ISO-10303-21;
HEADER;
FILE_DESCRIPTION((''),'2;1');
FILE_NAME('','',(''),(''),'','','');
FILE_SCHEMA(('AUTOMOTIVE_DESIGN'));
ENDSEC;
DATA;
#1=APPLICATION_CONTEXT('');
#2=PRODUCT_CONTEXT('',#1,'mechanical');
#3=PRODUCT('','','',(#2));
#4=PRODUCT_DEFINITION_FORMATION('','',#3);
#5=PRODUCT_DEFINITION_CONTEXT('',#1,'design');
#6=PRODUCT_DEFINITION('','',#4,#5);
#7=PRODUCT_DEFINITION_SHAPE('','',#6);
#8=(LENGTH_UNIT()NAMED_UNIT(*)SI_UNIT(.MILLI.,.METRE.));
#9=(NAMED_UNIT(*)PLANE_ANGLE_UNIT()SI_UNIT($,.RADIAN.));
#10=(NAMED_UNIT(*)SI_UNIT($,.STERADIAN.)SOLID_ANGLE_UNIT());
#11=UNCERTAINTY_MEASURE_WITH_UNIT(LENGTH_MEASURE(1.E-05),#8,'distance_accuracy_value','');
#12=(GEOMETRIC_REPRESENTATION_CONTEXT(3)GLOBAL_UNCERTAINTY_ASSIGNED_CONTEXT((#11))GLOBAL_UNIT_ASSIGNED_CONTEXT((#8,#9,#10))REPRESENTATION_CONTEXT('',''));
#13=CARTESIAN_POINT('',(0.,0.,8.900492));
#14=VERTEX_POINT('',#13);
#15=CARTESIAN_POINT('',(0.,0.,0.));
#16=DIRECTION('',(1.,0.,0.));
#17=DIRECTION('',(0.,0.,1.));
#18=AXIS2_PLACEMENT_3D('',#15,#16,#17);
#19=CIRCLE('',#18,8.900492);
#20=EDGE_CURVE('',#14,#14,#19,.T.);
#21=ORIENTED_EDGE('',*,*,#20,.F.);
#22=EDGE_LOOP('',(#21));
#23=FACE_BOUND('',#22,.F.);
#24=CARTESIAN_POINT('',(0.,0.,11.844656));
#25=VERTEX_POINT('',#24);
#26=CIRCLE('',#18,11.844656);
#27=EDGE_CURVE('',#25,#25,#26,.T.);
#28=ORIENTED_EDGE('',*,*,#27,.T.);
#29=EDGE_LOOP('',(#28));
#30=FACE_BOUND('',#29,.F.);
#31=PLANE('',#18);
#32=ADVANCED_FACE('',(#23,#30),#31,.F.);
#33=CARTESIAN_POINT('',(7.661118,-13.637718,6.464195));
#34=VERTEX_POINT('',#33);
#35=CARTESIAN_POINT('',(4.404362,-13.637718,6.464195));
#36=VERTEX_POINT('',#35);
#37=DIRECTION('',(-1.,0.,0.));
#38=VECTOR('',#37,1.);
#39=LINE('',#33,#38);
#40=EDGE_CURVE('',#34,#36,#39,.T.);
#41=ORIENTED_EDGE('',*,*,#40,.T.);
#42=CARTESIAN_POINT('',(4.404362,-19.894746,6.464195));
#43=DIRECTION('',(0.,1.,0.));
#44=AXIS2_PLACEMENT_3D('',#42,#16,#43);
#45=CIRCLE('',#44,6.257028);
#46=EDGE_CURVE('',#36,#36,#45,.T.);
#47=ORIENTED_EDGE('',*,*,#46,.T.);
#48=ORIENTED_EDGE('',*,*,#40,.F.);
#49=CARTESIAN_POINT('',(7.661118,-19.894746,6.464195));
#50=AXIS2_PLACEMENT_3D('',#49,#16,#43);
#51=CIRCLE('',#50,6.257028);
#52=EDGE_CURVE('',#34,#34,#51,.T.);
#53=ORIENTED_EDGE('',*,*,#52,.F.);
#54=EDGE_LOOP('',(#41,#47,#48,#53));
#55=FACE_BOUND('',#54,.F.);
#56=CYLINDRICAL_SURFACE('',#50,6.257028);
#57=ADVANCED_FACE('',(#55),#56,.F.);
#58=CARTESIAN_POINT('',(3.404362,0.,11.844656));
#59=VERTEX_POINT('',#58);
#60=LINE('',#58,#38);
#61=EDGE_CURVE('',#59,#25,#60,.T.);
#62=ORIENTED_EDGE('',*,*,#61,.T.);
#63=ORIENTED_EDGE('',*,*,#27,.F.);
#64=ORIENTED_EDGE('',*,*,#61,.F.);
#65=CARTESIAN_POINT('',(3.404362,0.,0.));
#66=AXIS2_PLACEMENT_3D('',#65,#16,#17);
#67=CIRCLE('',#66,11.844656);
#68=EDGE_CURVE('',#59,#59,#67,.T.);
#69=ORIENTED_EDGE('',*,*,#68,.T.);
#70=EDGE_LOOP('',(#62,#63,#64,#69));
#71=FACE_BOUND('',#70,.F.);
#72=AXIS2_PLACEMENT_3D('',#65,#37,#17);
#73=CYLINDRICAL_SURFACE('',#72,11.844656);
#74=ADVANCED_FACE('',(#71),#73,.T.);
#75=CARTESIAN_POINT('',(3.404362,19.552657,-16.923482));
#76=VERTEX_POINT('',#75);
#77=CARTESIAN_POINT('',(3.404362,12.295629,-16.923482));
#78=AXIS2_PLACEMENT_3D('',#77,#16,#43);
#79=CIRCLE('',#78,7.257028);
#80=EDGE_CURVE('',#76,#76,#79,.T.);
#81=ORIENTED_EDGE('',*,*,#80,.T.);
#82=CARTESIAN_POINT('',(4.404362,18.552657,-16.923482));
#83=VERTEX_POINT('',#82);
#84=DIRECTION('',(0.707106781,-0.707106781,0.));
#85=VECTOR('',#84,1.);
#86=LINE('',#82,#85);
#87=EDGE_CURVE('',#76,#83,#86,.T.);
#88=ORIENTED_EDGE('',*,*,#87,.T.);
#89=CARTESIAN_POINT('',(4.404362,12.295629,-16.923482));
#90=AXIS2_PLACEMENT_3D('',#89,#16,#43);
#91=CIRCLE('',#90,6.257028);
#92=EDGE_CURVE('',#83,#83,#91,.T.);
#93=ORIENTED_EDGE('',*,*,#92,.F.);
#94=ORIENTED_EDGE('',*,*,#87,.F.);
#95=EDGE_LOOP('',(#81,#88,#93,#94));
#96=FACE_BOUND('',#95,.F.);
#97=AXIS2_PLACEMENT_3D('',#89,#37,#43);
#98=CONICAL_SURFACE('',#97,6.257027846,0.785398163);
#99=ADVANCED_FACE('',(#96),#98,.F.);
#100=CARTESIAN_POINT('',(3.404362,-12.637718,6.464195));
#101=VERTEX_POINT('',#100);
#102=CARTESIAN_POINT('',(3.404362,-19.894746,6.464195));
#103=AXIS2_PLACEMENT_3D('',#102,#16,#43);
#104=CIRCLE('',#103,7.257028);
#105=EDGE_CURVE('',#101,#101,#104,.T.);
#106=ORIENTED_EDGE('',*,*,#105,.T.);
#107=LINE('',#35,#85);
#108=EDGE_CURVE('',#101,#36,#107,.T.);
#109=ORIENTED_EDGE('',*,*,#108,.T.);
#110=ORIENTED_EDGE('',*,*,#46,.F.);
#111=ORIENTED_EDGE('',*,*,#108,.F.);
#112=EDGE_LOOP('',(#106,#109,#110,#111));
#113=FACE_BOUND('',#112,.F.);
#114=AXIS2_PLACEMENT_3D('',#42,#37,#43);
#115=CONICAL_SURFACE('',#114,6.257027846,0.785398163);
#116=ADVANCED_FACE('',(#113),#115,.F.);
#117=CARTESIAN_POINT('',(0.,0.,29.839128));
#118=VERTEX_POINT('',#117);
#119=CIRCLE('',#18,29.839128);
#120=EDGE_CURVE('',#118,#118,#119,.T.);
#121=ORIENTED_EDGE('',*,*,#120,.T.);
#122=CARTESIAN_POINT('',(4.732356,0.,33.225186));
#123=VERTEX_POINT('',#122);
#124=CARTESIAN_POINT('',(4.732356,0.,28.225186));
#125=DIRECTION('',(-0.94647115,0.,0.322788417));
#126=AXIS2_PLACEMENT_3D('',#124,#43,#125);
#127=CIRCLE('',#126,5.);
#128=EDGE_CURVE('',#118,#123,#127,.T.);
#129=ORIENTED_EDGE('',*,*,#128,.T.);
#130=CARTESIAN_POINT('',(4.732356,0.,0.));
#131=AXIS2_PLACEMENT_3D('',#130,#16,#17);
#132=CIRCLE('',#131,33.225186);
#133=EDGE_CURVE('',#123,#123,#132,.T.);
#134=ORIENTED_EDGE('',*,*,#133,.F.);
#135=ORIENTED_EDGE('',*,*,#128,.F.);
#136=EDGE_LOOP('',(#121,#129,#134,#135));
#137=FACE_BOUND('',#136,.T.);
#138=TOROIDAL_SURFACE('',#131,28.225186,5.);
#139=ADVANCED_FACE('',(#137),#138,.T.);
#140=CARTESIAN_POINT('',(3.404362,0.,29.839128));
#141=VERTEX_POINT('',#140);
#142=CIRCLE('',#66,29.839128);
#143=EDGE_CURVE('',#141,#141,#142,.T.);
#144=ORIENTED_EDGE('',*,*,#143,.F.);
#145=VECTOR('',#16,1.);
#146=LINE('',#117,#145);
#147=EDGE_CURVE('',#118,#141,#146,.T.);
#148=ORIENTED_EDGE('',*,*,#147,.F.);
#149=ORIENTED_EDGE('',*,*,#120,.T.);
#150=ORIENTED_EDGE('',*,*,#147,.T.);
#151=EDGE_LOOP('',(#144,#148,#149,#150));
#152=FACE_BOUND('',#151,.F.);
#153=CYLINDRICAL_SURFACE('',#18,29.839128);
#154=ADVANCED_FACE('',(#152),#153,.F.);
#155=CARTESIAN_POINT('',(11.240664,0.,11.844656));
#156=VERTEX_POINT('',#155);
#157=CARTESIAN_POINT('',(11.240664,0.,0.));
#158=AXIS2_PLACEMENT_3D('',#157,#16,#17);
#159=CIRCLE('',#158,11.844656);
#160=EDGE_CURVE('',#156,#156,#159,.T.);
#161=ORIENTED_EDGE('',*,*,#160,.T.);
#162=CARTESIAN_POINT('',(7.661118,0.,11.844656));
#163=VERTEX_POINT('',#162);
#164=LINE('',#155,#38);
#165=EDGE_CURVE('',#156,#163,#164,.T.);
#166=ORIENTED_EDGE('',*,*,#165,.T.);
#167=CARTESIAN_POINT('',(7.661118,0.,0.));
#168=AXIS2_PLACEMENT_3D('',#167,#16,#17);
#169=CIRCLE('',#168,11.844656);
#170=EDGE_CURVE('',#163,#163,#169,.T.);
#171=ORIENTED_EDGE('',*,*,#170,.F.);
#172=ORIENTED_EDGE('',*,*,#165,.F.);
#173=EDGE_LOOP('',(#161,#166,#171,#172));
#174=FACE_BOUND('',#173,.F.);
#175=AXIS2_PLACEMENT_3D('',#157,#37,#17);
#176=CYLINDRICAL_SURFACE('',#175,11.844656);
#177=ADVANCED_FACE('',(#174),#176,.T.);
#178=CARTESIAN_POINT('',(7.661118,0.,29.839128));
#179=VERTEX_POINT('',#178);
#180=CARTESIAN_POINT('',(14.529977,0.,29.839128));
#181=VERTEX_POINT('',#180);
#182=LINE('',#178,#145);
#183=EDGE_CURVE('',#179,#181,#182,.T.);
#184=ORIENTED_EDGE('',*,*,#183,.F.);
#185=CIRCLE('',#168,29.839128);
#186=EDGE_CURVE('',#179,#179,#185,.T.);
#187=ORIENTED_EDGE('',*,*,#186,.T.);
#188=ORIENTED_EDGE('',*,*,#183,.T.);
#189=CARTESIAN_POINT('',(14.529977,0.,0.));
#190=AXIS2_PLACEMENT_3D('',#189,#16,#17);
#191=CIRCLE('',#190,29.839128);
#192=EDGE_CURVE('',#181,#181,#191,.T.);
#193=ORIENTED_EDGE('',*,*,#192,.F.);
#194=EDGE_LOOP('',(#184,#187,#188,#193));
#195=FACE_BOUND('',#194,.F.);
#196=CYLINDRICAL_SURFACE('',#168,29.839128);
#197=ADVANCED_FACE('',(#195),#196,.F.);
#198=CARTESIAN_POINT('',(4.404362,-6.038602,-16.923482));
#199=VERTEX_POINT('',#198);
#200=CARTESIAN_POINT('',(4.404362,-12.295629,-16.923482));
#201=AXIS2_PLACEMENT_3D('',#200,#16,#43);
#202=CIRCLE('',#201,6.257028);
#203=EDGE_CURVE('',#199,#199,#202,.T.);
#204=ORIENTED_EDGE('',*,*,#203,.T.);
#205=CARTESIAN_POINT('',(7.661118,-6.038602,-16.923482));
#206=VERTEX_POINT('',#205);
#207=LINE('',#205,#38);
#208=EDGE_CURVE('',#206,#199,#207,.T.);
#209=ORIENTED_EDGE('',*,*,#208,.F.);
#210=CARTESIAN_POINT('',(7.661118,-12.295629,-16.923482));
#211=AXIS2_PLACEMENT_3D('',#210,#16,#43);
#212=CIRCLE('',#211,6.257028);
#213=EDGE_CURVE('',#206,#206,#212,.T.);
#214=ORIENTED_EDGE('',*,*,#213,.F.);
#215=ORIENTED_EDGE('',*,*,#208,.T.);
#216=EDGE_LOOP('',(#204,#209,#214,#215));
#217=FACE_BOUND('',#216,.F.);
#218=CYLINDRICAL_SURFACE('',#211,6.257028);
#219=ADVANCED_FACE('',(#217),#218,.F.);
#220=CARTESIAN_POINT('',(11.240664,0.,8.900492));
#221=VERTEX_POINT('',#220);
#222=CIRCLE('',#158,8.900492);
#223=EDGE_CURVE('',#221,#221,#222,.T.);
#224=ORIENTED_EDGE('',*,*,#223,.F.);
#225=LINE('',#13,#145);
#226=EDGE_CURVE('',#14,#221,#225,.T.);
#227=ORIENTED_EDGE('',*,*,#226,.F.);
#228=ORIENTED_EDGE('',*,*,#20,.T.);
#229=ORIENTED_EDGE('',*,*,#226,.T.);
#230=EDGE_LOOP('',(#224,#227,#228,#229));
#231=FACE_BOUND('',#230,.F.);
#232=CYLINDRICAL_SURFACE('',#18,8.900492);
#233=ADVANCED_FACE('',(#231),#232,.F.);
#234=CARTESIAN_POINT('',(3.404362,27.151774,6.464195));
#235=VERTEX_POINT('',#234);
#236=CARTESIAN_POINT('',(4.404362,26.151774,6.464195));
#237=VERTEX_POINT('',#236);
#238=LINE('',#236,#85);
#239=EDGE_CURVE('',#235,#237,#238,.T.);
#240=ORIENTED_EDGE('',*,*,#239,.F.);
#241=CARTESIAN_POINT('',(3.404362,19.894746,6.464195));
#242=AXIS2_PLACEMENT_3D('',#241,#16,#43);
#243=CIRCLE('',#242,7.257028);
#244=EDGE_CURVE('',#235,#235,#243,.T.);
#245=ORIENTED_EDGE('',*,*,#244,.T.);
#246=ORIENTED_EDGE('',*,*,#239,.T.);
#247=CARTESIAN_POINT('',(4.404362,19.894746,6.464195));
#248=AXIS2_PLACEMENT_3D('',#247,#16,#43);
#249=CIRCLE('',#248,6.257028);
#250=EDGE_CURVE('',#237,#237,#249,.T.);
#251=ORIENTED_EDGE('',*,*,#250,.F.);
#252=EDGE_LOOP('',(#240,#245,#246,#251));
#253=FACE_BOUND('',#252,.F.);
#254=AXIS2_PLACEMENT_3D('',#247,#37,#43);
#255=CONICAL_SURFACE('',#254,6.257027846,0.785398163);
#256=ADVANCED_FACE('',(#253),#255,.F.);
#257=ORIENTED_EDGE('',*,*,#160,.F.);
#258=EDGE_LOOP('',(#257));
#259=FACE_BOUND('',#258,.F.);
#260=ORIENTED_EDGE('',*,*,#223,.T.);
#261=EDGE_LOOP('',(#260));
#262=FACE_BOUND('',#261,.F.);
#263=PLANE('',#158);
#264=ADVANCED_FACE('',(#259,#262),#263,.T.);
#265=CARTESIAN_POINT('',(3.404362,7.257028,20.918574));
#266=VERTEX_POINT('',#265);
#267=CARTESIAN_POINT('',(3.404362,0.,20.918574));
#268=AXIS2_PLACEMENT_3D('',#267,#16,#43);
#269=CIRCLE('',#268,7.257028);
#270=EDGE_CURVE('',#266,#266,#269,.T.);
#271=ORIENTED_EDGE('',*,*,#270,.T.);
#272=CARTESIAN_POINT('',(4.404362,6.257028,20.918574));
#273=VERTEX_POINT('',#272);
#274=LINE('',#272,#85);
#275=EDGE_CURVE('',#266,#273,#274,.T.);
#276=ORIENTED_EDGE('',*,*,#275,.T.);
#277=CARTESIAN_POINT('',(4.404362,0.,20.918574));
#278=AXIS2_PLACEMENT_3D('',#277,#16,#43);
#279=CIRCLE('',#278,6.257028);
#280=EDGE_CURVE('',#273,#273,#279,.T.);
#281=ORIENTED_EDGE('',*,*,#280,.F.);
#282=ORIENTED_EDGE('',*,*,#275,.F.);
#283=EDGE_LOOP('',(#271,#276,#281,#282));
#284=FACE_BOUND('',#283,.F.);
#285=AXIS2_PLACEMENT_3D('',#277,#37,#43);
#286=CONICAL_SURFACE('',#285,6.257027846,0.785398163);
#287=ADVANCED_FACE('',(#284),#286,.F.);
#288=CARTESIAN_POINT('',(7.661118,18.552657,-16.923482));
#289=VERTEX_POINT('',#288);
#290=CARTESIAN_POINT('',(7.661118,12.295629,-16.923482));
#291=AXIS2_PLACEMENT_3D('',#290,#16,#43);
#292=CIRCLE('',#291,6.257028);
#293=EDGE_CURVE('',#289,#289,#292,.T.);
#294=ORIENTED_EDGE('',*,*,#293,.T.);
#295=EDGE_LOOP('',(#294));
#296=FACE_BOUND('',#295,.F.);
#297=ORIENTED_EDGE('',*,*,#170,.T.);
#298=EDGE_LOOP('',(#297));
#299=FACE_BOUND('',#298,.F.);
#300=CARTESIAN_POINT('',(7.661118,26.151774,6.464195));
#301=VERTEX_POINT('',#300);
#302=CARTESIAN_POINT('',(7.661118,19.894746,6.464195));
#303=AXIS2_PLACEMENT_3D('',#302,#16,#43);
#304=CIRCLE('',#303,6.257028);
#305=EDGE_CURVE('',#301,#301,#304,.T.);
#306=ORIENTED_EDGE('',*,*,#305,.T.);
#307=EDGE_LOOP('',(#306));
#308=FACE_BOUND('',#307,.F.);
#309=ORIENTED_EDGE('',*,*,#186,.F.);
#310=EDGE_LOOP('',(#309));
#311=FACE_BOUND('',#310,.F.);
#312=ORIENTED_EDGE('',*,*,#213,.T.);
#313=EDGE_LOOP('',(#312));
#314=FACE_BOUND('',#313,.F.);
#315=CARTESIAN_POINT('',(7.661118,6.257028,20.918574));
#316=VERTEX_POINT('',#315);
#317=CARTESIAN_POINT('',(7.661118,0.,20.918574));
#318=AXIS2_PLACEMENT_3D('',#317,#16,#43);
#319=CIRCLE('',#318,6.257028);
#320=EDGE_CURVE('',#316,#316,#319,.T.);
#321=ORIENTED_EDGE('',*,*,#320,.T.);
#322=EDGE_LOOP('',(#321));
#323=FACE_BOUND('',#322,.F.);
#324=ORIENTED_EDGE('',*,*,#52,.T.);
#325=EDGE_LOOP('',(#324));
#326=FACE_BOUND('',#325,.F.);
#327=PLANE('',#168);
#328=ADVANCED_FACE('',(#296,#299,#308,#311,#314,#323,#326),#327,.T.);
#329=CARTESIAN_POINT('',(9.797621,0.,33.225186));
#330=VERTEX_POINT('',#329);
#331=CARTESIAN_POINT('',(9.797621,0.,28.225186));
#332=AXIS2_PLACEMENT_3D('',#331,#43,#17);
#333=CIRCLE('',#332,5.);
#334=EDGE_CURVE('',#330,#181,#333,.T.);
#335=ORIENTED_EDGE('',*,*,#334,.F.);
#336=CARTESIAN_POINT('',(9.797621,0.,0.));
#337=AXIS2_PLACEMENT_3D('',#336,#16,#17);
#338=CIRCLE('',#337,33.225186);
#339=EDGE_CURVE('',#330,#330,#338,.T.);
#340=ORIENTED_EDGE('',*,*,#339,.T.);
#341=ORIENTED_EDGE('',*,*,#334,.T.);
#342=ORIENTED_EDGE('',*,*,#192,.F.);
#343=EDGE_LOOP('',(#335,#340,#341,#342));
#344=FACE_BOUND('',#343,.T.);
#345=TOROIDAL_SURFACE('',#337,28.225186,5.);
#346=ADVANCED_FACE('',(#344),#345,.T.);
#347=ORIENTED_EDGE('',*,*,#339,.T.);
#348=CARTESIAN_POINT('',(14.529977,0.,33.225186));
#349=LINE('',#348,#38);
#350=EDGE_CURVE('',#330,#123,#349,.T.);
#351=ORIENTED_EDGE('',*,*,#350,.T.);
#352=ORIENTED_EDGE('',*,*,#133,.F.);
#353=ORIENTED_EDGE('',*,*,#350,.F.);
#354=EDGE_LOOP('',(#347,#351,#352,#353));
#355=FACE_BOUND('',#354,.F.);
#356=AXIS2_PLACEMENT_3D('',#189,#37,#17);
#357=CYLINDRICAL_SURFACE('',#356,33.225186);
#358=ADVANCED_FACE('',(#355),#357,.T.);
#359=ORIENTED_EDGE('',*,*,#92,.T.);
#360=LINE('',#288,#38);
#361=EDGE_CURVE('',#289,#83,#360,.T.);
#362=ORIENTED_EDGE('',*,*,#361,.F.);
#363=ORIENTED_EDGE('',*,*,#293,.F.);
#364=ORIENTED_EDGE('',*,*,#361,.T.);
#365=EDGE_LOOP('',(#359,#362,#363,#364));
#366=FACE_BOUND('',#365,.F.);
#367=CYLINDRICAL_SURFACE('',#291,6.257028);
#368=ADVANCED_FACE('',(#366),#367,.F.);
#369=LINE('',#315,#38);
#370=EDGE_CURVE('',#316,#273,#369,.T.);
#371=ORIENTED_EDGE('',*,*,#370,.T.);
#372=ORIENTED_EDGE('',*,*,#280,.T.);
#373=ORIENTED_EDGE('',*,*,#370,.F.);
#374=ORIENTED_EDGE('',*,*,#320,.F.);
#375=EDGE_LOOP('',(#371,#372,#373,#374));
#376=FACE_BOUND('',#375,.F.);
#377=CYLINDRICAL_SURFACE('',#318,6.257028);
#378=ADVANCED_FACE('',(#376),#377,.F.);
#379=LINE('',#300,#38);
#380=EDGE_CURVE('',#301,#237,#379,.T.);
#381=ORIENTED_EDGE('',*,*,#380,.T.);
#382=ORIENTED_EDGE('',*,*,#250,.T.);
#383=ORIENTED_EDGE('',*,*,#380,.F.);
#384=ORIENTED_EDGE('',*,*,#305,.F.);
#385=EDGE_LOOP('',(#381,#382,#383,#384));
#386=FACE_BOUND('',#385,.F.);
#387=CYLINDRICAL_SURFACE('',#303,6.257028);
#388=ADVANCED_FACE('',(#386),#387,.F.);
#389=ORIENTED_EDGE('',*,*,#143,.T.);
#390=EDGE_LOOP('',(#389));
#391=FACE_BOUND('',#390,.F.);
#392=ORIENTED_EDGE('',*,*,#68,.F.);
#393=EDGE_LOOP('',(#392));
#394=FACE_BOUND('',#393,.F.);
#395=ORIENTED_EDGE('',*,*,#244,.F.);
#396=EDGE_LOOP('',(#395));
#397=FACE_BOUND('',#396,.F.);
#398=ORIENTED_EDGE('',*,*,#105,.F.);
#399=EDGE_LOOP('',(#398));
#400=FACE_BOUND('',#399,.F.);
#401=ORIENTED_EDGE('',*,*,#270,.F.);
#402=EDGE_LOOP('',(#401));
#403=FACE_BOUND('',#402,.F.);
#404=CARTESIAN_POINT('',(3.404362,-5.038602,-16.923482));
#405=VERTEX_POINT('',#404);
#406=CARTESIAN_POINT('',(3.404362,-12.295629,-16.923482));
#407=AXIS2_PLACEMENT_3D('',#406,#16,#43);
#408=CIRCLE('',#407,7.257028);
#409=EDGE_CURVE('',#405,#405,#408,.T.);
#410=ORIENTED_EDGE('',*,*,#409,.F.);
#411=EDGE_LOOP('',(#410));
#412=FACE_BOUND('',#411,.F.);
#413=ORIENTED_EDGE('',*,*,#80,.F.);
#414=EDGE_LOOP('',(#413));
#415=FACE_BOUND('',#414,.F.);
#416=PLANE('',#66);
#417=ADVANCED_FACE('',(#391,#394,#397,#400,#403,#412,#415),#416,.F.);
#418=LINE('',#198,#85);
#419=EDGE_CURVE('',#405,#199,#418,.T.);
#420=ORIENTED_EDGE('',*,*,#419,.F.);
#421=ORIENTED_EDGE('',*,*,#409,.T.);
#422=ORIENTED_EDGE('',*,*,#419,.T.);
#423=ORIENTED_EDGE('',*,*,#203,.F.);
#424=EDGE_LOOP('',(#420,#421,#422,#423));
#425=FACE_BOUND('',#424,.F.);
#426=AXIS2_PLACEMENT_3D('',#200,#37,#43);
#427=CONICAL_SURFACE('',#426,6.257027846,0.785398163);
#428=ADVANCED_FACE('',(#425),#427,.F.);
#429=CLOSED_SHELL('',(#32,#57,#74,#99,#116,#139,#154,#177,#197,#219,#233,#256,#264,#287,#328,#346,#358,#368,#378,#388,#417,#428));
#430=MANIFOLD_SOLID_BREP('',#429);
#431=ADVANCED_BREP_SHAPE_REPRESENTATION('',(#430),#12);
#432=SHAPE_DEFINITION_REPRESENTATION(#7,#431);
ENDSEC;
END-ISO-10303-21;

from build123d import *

# Parameters (mm, degrees)
F2_R     = 6.2570278464
F3_DEPTH = 25
F5_SIZE  = 1


# Not quite as in the source:
# - a fillet or chamfer that OpenCascade refuses, or shapes differently, is made with other operations: its cross-section is extruded or revolved along the edge and cut away or added


with BuildPart() as f1:
    # F0 (on Front) → F1 (revolve)
    with BuildSketch(Plane.XZ):
        Polygon((0, 11.8446564302), (0, 8.9004915208), (11.2406639382, 8.9004915208), (11.2406639382, 11.8446564302), (7.6611181721, 11.8446564302), (7.6611181721, 29.8391282558), (14.5299769938, 29.8391282558), (14.5299769938, 33.2251861691), (0, 33.2251861691), (0, 29.8391282558), (3.4043616615, 29.8391282558), (3.4043616615, 11.8446564302), align=None)
    revolve(axis=Axis((7.4493242428, 0, 0), (1, 0, 0)))

    # F2 (on face) → F3 (cut)
    with BuildSketch(Plane.YZ.offset(7.6611181721)):
        with Locations((0, 20.9185741842)):
            Circle(F2_R)
        with Locations((19.8947462895, 6.464194921)):
            Circle(F2_R)
        with Locations((12.2956294044, -16.9234820131)):
            Circle(F2_R)
        with Locations((-12.2956294044, -16.9234820131)):
            Circle(F2_R)
        with Locations((-19.8947462895, 6.464194921)):
            Circle(F2_R)
    extrude(amount=-F3_DEPTH, mode=Mode.SUBTRACT)

    # F4: fillet of radius 5 on 3 edges, made by hand

    # F4_s1 → F4_t2 (revolve, cut)
    with BuildSketch(Plane.XZ):
        with BuildLine():
            ThreePointArc((9.7976212442, 33.2251861691), (12.7071134307, 32.2914934887), (14.5299769938, 29.8391282558))
            Line((14.5299769938, 29.8391282558), (14.6246241088, 29.8714070976))
            ThreePointArc((14.6246241088, 29.8714070976), (14.6299769938, 31.5321572125), (14.6299769938, 33.2251861691))
            Line((14.6299769938, 33.2251861691), (14.5299769938, 33.3251861691))
            Line((14.5299769938, 33.3251861691), (9.7976212442, 33.3251861691))
            Line((9.7976212442, 33.3251861691), (9.7976212442, 33.2251861691))
        make_face()
    revolve(axis=Axis((14.5299769938, 0, 0), (1, 0, 0)), mode=Mode.SUBTRACT)

    # F4_s3 → F4_t4 (revolve, cut)
    with BuildSketch(Plane.XZ):
        with BuildLine():
            ThreePointArc((0, 29.8391282558), (1.8228635631, 32.2914934887), (4.7323557496, 33.2251861691))
            Line((4.7323557496, 33.2251861691), (4.7323557496, 33.3251861691))
            Line((4.7323557496, 33.3251861691), (0, 33.3251861691))
            Line((0, 33.3251861691), (-0.1, 33.2251861691))
            ThreePointArc((-0.1, 33.2251861691), (-0.1, 31.5321572125), (-0.094647115, 29.8714070976))
            Line((-0.094647115, 29.8714070976), (0, 29.8391282558))
        make_face()
    revolve(axis=Axis((0, 0, 0), (1, 0, 0)), mode=Mode.SUBTRACT)

    # F5
    f5_edges = [f1.edges().sort_by_distance(p)[0] for p in [
        (3.404362, -6.257028, 20.918574),
        (3.404362, -26.151774, 6.464195),
        (3.404362, -18.552657, -16.923482),
        (3.404362, 6.038602, -16.923482),
        (3.404362, 13.637718, 6.464195),
    ]]
    chamfer(f5_edges, length=F5_SIZE)


solid = f1.part
